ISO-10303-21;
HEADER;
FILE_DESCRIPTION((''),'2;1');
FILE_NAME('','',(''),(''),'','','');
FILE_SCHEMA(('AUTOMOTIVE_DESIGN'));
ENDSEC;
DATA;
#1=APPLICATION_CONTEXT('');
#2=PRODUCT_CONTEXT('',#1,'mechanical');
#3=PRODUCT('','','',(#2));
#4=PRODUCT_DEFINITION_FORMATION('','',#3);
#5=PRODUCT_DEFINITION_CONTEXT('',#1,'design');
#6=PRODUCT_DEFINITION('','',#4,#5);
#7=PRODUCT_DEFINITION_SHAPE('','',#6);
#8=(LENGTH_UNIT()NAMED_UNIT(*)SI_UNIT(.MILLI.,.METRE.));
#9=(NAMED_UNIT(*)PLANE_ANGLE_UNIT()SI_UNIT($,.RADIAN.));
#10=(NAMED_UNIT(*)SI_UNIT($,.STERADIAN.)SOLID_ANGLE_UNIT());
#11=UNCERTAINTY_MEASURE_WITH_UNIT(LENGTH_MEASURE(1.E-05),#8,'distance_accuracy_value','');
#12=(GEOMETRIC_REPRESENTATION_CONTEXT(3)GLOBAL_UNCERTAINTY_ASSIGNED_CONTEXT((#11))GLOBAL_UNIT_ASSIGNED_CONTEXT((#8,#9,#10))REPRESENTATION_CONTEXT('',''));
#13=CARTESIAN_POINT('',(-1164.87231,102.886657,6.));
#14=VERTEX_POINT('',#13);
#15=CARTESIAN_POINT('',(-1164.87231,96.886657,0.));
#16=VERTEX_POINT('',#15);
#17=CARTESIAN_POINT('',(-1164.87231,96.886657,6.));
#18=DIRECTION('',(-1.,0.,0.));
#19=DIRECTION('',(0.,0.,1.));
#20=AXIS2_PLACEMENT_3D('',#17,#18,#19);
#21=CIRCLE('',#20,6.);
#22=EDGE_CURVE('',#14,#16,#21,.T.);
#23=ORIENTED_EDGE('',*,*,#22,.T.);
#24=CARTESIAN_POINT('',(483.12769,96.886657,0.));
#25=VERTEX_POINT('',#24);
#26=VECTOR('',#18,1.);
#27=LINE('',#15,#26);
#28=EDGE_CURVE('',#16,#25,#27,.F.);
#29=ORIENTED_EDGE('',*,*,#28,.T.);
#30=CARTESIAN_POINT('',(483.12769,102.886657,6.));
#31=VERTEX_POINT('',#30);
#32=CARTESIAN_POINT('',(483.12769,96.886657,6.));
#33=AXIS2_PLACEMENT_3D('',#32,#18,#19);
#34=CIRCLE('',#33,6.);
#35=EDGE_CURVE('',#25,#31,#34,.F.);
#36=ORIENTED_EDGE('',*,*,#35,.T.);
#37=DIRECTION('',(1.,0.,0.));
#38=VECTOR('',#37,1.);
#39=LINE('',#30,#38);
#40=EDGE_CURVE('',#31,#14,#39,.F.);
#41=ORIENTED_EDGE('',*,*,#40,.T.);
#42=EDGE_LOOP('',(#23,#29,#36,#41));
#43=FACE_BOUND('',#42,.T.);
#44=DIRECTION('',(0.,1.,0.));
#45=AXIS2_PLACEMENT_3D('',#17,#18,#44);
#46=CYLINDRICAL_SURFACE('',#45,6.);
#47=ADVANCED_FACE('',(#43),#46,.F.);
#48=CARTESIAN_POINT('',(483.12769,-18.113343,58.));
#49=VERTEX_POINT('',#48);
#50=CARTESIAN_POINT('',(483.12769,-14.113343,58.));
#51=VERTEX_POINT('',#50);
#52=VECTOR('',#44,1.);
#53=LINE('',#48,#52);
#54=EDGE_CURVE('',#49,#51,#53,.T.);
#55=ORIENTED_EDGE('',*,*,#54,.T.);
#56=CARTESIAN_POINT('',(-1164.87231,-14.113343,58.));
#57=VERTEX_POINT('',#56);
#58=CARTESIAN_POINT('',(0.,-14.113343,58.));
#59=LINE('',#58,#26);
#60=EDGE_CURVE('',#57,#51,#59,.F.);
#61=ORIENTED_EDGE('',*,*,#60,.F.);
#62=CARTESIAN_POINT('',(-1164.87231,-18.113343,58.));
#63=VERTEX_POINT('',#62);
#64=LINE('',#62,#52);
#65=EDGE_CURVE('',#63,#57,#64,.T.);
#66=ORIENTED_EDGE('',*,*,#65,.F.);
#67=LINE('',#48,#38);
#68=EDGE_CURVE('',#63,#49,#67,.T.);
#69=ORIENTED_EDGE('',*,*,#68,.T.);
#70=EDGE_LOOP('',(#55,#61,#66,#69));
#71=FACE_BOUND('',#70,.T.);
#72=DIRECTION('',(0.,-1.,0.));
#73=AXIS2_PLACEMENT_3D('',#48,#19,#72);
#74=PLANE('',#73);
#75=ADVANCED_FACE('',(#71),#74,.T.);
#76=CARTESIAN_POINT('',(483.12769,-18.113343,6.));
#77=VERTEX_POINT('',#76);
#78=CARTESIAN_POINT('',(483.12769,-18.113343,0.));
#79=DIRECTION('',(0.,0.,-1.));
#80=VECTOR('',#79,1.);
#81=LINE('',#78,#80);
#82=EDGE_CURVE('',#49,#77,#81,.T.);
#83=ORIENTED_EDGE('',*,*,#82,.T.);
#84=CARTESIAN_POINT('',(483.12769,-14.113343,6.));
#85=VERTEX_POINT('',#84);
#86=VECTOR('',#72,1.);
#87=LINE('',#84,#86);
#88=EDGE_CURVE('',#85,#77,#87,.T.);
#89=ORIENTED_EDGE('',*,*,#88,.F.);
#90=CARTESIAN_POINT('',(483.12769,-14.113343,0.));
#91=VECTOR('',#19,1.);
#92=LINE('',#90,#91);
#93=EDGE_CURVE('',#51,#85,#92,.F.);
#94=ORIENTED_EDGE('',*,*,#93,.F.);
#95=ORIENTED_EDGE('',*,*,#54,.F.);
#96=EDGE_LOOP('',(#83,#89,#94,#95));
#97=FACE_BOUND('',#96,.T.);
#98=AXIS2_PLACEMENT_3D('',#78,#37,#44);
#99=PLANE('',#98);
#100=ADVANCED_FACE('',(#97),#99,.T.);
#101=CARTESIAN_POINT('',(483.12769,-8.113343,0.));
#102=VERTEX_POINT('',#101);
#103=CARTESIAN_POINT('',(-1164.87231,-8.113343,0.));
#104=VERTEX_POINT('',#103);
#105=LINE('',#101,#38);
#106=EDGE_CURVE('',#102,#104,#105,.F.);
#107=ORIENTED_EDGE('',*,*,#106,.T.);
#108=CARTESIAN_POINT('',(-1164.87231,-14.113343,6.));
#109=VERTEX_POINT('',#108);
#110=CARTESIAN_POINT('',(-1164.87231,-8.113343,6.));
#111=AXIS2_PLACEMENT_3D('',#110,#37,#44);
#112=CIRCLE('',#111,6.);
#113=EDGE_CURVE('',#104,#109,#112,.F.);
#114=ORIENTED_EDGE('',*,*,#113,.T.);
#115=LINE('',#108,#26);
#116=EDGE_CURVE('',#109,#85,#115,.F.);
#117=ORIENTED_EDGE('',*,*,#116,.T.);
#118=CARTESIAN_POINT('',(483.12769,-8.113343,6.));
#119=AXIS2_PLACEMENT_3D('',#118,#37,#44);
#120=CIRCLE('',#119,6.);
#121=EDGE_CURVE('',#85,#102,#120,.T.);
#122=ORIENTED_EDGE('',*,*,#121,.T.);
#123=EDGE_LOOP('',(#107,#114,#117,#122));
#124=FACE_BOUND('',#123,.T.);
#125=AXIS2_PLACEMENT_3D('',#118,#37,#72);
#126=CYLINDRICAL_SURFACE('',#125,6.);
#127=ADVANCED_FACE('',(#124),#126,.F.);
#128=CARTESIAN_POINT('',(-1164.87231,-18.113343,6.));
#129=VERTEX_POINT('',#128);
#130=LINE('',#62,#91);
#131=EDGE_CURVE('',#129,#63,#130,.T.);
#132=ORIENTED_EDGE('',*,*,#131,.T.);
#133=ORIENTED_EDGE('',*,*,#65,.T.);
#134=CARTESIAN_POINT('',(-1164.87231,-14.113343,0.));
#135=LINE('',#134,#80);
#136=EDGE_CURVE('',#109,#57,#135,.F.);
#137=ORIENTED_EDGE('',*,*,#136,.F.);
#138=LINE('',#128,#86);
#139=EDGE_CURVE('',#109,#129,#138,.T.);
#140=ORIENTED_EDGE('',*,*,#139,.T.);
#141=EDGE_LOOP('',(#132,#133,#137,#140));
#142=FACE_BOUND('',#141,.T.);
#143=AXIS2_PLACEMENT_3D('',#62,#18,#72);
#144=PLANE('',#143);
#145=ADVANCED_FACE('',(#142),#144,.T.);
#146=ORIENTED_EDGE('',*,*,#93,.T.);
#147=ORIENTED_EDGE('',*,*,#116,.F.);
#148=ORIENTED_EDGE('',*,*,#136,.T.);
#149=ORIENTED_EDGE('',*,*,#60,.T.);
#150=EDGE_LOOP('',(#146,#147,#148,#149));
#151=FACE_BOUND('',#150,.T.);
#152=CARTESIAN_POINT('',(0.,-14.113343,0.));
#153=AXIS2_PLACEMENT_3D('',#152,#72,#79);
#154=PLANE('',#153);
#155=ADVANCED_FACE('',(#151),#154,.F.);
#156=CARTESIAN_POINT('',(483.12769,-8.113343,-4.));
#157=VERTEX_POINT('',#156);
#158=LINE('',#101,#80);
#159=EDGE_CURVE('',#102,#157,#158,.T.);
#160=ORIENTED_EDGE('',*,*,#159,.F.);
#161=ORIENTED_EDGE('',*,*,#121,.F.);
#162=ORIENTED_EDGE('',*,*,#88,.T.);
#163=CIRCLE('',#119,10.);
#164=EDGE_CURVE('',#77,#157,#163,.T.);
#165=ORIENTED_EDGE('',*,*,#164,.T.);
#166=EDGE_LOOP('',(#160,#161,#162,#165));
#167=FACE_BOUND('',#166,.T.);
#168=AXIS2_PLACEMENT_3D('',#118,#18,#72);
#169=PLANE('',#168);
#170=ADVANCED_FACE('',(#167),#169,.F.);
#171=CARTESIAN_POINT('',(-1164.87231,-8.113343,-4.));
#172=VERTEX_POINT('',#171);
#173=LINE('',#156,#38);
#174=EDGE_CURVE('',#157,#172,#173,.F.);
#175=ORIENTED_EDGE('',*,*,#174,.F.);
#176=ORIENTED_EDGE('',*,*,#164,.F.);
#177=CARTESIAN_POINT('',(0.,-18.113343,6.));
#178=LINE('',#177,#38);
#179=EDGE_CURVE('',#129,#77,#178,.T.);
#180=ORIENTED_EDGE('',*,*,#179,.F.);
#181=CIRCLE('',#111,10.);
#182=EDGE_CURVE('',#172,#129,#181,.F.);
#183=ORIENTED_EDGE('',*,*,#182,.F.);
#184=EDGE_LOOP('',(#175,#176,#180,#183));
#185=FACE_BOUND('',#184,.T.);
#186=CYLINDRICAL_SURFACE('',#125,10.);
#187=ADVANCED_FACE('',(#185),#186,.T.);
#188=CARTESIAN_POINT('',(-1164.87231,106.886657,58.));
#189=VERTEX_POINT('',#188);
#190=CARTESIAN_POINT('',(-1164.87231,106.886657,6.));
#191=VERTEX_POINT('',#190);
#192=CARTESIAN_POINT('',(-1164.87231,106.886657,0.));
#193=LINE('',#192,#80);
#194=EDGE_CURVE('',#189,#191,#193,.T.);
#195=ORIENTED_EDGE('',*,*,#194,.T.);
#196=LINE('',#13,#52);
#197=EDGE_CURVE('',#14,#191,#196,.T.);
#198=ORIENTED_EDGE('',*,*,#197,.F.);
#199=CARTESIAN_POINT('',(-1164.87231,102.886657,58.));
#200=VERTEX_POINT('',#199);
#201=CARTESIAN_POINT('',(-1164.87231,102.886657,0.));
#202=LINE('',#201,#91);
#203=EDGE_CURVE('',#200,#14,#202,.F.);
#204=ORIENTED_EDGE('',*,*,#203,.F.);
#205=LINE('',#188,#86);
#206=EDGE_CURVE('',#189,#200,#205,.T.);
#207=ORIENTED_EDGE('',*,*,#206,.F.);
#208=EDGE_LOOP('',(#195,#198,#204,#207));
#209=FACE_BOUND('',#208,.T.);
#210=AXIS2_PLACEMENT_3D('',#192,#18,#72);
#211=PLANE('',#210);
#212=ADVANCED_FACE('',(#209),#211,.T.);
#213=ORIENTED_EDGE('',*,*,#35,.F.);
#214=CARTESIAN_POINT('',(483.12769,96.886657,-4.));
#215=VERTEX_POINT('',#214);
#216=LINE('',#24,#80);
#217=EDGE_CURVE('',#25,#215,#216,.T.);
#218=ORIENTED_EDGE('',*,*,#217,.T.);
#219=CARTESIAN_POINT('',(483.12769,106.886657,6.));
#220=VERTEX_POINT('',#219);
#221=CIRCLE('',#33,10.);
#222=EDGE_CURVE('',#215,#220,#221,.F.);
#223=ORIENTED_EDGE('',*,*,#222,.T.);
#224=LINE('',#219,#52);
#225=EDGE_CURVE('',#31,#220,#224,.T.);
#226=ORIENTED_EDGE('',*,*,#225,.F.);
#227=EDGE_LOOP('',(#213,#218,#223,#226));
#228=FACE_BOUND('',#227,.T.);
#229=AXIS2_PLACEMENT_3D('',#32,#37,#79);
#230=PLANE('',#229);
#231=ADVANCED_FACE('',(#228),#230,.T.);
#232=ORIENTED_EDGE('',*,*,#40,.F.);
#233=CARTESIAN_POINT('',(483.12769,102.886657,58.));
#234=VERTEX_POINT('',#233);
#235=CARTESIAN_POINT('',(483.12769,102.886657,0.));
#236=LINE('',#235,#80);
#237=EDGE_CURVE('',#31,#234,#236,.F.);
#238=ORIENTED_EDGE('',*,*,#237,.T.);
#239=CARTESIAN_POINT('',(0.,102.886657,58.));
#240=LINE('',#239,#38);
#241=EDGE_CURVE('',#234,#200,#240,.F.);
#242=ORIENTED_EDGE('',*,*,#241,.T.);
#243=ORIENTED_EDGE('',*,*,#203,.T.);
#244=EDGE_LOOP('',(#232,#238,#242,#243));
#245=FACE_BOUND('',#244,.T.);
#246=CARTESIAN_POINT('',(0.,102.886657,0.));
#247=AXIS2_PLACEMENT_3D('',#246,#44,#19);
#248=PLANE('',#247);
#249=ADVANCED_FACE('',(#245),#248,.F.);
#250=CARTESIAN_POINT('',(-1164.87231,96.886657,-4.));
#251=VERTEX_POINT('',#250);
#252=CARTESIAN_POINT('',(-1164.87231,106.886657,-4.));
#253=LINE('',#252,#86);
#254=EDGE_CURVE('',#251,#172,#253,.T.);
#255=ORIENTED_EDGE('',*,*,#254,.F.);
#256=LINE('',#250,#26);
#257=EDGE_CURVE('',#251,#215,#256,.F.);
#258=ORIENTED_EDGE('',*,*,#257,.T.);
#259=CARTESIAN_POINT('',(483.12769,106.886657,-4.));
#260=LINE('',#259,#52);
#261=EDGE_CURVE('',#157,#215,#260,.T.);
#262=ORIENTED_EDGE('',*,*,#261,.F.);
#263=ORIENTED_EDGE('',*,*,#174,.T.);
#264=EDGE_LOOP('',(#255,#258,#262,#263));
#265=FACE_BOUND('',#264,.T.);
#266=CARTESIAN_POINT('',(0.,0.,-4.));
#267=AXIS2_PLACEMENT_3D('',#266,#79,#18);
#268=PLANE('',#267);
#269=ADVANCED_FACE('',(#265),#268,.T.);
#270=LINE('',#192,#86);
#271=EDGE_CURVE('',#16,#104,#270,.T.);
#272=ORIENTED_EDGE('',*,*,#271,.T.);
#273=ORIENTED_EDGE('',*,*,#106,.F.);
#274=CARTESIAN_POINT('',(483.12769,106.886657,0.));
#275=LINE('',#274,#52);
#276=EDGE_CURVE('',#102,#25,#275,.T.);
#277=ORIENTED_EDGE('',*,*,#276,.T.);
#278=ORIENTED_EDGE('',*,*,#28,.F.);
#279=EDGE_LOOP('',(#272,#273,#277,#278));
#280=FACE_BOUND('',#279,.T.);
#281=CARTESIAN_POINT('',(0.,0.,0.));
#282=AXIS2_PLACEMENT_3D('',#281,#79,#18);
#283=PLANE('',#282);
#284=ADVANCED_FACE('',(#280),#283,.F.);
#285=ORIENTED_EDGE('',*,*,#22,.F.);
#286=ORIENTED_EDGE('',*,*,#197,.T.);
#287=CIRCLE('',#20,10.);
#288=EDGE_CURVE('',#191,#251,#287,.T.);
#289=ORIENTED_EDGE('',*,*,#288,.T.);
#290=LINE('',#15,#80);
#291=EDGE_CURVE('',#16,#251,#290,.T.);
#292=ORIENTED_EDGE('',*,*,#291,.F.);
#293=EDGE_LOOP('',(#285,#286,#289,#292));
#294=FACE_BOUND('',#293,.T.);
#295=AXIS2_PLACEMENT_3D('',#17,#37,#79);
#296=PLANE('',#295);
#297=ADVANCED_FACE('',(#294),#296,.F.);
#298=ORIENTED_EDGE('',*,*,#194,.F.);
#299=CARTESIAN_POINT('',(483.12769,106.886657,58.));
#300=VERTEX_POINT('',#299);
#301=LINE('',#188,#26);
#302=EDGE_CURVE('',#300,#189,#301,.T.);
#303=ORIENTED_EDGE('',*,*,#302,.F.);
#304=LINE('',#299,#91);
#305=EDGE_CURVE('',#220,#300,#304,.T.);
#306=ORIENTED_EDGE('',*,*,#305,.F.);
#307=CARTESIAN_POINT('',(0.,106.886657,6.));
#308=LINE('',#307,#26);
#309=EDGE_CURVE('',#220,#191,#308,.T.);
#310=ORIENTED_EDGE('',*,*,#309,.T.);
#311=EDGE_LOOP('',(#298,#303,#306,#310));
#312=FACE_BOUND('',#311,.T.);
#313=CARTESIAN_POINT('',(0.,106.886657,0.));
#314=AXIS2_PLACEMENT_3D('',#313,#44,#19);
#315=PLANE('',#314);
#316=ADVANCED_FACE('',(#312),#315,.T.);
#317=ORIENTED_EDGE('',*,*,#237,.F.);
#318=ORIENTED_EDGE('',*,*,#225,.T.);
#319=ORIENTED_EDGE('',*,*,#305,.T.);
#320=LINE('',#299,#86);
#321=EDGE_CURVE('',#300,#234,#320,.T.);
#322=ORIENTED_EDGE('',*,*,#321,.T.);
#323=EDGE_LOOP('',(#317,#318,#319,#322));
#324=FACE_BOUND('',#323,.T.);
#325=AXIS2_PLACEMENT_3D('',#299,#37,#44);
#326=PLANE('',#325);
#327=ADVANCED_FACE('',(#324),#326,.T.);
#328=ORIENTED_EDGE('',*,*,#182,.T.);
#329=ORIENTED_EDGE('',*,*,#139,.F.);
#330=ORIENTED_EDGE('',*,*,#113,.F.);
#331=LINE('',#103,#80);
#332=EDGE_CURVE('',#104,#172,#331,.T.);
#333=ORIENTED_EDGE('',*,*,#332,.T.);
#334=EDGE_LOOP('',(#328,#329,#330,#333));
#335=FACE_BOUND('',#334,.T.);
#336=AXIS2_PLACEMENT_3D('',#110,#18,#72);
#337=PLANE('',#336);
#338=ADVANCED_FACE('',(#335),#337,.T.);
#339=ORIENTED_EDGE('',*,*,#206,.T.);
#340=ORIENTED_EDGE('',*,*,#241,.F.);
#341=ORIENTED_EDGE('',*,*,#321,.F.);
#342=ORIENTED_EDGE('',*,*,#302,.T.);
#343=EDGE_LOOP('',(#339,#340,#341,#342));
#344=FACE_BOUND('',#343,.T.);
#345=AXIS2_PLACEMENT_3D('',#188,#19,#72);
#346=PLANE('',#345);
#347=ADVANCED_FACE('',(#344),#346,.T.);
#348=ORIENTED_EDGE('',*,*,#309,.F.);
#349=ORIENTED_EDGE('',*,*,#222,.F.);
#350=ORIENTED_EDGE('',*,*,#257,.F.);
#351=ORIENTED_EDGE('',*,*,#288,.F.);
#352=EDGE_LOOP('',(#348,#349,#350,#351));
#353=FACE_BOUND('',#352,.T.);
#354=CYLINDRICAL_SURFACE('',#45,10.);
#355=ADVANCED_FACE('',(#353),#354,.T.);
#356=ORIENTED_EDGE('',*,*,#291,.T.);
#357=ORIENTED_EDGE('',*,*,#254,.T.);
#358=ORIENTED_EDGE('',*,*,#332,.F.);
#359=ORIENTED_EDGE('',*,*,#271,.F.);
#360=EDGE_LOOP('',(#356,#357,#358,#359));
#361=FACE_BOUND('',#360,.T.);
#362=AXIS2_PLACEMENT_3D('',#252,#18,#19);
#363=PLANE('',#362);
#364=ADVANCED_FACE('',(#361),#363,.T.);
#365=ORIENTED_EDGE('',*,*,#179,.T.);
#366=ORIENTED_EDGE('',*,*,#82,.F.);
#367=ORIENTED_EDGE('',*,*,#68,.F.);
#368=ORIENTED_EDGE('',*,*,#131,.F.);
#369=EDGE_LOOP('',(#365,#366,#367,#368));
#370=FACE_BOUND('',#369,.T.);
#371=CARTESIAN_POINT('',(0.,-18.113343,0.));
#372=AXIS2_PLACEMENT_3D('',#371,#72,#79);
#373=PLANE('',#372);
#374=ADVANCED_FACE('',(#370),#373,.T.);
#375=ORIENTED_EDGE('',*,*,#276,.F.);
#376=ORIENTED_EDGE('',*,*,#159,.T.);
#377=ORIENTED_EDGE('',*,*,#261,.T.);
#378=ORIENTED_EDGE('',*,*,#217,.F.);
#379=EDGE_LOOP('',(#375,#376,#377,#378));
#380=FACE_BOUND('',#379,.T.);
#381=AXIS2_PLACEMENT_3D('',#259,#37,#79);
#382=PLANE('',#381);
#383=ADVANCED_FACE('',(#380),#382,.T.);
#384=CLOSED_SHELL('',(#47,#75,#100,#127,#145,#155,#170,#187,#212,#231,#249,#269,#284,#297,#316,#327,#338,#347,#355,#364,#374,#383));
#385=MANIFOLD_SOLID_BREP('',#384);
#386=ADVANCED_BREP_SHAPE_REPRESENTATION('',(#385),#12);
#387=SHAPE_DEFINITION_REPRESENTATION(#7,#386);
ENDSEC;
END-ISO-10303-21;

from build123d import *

# Parameters (mm, degrees)
SKETCH1_W                    = 1648
SKETCH1_H                    = 125
BASE_FLANGE1_DEPTH           = 4
EDGE_FLANGE1_STRIP_W         = 28
EDGE_FLANGE1_STRIP_H         = 4
EDGE_FLANGE1_STRIP_CUT_DEPTH = 1648
EDGE_FLANGE1_DEPTH           = 1648
EDGE_FLANGE2_STRIP_W         = 28
EDGE_FLANGE2_STRIP_H         = 4
EDGE_FLANGE2_STRIP_CUT_DEPTH = 1648
EDGE_FLANGE2_DEPTH           = 1648


# Sheet-metal steps are written as plain solids
with BuildPart() as part:
    # Sketch1 → Base-Flange1 (new body)
    with BuildSketch(Plane.XY):
        with Locations((-340.8723099, 44.386657102)):
            Rectangle(SKETCH1_W, SKETCH1_H)
    extrude(amount=-BASE_FLANGE1_DEPTH)

    # Edge-Flange1 strip (across the edge) → Edge-Flange1 strip cut (cut)
    with BuildSketch(Plane(origin=(483.1276901, 106.886657102, 0), x_dir=(0, -1, 0), z_dir=(-1, 0, 0))):
        with Locations((-4, -2)):
            Rectangle(EDGE_FLANGE1_STRIP_W, EDGE_FLANGE1_STRIP_H)
    extrude(amount=EDGE_FLANGE1_STRIP_CUT_DEPTH, mode=Mode.SUBTRACT)

    # Edge-Flange1 section (across the edge) → Edge-Flange1 (add)
    with BuildSketch(Plane(origin=(483.1276901, 106.886657102, 0), x_dir=(0, -1, 0), z_dir=(-1, 0, 0))):
        with BuildLine():
            Line((0, 6), (0, 58))
            Line((0, 58), (4, 58))
            Line((4, 58), (4, 6))
            ThreePointArc((4, 6), (5.757359313, 1.757359313), (10, 0))
            Line((10, 0), (10, -4))
            ThreePointArc((10, -4), (2.928932188, -1.071067812), (0, 6))
        make_face()
    extrude(amount=EDGE_FLANGE1_DEPTH)

    # Edge-Flange2 strip (across the edge) → Edge-Flange2 strip cut (cut)
    with BuildSketch(Plane(origin=(-1164.8723099, -18.113342898, 0), x_dir=(0, 1, 0), z_dir=(1, 0, 0))):
        with Locations((-4, -2)):
            Rectangle(EDGE_FLANGE2_STRIP_W, EDGE_FLANGE2_STRIP_H)
    extrude(amount=EDGE_FLANGE2_STRIP_CUT_DEPTH, mode=Mode.SUBTRACT)

    # Edge-Flange2 section (across the edge) → Edge-Flange2 (add)
    with BuildSketch(Plane(origin=(-1164.8723099, -18.113342898, 0), x_dir=(0, 1, 0), z_dir=(1, 0, 0))):
        with BuildLine():
            Line((0, 6), (0, 58))
            Line((0, 58), (4, 58))
            Line((4, 58), (4, 6))
            ThreePointArc((4, 6), (5.757359313, 1.757359313), (10, 0))
            Line((10, 0), (10, -4))
            ThreePointArc((10, -4), (2.928932188, -1.071067812), (0, 6))
        make_face()
    extrude(amount=EDGE_FLANGE2_DEPTH)


solid = part.part
